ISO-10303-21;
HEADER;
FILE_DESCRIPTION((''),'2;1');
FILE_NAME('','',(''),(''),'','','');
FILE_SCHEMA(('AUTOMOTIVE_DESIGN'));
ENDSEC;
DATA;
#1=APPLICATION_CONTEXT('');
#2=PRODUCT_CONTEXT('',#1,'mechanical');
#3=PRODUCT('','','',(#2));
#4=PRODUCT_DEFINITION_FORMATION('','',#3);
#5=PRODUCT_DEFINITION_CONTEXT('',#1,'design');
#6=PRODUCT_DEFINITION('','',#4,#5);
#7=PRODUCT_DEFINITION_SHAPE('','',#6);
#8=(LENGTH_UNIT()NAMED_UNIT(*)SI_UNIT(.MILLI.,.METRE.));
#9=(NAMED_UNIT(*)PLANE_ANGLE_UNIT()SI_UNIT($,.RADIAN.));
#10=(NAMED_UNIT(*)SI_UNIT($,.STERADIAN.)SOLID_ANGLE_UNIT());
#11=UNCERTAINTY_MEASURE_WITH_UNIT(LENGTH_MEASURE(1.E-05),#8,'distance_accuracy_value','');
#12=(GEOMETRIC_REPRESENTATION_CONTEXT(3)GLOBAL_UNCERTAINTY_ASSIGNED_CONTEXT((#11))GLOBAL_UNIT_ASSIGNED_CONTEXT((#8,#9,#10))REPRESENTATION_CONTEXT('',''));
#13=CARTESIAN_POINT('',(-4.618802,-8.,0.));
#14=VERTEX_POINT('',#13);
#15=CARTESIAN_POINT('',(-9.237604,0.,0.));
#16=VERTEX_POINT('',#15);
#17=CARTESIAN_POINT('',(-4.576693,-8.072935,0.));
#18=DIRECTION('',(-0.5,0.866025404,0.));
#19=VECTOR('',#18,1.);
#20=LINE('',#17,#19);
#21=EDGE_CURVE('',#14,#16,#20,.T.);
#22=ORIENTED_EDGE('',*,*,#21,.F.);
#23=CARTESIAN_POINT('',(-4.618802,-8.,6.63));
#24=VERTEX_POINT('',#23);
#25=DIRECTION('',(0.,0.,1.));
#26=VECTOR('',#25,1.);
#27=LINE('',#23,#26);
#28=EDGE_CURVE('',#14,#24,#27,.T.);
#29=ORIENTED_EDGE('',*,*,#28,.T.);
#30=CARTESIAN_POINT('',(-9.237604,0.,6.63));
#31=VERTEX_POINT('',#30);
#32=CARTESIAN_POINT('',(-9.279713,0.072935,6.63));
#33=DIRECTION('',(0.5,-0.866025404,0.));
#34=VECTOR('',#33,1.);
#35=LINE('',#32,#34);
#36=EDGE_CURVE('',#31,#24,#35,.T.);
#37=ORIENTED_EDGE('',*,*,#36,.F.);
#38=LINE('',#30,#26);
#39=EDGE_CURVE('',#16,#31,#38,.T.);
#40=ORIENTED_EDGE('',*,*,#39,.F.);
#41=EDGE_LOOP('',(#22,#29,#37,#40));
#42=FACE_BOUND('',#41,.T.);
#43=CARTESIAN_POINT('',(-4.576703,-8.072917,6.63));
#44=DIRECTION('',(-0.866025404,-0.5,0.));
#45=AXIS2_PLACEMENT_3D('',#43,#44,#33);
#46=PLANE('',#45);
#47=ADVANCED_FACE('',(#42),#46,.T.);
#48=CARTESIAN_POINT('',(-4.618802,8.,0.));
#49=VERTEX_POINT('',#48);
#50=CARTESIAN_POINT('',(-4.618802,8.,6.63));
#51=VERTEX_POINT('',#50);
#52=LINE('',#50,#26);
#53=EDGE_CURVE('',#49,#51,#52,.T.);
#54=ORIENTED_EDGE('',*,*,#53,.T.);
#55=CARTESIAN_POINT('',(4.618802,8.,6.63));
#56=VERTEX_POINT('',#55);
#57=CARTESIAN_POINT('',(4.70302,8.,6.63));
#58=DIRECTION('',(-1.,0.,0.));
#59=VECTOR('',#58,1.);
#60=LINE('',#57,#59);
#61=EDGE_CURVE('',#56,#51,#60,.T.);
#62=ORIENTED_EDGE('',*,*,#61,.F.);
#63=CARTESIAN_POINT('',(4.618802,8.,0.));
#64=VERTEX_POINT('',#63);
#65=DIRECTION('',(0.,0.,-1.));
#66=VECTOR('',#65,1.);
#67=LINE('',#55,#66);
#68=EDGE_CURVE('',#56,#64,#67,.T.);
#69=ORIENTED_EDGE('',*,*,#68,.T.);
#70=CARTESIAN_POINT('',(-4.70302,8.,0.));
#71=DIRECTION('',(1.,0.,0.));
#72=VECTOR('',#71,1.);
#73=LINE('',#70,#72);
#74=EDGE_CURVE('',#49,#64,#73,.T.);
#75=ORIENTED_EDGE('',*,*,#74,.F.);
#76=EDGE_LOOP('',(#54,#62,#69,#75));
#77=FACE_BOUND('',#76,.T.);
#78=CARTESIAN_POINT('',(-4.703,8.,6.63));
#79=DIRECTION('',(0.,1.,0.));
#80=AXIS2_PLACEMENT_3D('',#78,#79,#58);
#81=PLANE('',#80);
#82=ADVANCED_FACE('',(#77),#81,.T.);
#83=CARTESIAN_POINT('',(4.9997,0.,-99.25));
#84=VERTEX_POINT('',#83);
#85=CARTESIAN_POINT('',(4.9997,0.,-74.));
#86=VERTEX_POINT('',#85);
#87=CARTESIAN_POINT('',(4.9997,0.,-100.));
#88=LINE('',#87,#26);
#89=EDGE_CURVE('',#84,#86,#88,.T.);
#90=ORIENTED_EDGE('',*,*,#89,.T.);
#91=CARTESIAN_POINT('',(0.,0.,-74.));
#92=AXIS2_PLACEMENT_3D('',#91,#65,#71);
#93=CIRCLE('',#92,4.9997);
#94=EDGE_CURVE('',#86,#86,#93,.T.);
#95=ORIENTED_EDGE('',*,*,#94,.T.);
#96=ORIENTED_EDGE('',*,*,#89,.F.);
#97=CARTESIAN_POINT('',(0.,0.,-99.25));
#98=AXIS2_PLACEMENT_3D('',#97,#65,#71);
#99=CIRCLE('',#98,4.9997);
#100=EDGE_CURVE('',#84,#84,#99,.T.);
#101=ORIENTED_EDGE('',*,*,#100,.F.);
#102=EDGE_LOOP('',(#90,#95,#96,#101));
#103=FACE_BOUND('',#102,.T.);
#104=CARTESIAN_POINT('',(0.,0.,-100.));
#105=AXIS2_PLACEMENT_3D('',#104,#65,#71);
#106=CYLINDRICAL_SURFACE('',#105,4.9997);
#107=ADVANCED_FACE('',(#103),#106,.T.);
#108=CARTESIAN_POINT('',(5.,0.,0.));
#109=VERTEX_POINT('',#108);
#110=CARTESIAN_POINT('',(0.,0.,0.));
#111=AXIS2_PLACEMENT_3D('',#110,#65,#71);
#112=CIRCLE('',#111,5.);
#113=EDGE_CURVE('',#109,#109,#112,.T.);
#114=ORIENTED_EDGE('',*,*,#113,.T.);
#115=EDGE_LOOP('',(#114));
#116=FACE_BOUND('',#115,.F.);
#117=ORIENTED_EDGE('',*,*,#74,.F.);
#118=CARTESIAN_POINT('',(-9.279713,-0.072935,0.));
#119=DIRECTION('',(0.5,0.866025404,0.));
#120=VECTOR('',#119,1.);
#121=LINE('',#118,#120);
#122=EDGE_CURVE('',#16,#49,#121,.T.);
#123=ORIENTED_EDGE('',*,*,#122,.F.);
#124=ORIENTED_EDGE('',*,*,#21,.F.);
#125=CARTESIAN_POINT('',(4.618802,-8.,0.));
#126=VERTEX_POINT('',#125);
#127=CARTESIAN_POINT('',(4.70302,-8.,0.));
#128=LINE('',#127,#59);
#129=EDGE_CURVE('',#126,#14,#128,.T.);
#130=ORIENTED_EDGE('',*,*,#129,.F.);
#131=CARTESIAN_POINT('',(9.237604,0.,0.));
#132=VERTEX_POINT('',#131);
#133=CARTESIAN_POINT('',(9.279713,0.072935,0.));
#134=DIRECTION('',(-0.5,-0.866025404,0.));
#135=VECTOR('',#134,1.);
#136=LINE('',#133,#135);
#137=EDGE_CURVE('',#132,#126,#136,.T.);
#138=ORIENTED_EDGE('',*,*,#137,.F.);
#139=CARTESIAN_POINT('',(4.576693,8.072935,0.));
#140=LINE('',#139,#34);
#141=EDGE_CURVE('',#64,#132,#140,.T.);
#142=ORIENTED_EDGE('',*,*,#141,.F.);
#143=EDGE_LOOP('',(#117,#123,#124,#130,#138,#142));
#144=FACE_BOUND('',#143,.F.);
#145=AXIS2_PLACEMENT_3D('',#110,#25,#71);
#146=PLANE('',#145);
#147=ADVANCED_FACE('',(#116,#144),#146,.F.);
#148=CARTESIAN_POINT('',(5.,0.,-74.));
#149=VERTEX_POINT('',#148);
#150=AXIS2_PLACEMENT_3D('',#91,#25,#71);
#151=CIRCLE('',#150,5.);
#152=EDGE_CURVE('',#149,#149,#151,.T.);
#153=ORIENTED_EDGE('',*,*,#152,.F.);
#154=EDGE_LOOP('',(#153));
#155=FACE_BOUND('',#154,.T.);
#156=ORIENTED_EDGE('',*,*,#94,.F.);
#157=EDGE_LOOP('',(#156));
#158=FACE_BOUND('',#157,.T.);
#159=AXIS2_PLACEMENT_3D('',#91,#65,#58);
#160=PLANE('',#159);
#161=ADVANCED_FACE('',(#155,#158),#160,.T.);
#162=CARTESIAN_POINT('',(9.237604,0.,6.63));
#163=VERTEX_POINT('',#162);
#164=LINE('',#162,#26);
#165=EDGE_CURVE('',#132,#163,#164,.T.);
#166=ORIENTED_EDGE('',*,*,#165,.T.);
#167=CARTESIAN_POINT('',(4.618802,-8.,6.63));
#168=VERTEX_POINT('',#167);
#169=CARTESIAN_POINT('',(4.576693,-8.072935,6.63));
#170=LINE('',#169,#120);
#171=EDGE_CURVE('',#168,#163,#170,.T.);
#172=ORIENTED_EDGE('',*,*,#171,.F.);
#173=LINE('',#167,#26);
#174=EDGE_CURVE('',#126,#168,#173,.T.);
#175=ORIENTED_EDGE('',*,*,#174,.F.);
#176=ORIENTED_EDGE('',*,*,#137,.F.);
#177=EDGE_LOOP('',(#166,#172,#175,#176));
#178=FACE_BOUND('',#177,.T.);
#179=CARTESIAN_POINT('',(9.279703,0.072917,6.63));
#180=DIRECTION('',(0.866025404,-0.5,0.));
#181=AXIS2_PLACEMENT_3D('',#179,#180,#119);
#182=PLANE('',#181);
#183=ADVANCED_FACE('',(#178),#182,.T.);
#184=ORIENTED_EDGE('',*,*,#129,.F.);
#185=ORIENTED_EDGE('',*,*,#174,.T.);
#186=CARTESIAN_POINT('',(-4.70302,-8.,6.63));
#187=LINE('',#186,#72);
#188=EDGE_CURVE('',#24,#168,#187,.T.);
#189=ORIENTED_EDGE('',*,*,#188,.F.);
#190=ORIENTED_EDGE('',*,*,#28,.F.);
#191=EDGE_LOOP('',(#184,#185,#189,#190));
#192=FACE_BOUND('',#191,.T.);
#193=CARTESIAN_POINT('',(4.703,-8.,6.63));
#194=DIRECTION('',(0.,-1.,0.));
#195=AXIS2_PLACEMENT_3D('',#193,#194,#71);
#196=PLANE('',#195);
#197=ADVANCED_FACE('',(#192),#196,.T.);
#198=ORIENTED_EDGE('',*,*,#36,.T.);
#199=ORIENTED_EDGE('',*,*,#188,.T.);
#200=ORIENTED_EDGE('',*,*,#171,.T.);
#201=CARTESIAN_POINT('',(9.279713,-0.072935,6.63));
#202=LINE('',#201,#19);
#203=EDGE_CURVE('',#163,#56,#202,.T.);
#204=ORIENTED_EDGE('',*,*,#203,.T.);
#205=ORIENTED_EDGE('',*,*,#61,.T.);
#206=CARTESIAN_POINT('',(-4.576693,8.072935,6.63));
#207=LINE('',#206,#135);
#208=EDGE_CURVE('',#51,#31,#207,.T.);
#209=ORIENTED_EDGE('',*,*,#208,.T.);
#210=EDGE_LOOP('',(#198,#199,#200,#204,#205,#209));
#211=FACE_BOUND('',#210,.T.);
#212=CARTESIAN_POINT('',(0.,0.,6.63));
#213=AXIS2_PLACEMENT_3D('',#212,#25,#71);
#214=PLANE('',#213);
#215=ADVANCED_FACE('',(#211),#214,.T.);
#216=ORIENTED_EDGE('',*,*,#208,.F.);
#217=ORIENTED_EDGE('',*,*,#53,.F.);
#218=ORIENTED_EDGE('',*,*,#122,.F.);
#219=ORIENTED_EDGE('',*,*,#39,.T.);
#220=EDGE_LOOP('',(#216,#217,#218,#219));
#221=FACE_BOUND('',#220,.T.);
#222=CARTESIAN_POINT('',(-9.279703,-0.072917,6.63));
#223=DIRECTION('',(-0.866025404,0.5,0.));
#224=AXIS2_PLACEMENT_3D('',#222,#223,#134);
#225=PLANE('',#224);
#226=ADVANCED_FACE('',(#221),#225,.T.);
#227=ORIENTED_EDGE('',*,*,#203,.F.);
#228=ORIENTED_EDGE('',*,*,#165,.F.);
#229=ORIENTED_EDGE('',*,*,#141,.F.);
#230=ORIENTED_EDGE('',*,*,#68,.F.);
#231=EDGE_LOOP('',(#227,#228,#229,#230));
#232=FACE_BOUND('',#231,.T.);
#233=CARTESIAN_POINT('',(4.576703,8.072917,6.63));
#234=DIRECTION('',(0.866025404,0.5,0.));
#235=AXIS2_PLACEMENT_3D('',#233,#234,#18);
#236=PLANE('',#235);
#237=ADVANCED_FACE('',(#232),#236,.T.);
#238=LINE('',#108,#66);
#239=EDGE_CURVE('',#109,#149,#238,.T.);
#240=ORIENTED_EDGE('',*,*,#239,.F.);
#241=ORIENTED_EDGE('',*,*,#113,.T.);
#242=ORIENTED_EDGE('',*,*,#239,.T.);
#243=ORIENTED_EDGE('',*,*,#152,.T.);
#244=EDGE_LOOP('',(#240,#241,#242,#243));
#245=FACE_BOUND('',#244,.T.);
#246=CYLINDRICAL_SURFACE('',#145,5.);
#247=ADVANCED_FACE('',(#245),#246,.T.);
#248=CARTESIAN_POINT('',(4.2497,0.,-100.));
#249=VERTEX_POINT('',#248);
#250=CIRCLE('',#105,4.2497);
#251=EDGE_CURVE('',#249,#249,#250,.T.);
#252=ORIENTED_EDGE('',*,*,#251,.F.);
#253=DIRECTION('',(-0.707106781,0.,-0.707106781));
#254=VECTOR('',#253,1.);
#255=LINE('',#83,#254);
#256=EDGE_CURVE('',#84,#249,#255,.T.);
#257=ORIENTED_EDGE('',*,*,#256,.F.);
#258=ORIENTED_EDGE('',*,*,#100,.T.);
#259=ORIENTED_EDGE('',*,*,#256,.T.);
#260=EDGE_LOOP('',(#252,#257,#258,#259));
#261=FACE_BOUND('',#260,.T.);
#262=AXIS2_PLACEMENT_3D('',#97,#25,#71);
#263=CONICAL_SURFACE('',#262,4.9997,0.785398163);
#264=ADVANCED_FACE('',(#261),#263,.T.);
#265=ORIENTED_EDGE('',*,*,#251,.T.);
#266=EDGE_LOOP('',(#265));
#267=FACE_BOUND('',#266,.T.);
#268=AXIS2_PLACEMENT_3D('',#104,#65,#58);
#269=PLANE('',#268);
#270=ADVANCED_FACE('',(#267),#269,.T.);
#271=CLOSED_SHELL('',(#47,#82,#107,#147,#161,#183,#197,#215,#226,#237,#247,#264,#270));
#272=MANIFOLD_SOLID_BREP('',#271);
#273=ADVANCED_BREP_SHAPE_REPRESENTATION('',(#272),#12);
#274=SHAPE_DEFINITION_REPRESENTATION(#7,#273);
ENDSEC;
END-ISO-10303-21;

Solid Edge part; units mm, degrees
sketch "Sketch1" plane through (0, 0, 0) normal (0, 0, 1) x (1, 0, 0)
  circle A0 centre (0, 0) radius 9.28
  dimension "D1" = 18.56
extrude "Protrusion1" add sketch "Sketch1" along normal blind 6.63
sketch "Sketch2" plane through (0, 0, 0) normal (0, 0, -1) x (1, 0, 0)
  circle A0 centre (0, 0) radius 5
extrude "Protrusion2" add sketch "Sketch2" along normal blind 100
sketch "Sketch3" plane through (0, 0, -100) normal (0, 0, -1) x (1, 0, 0)
  circle A0 centre (0, 0) radius 4.9997
extrude "Cutout1" cut sketch "Sketch3" against normal blind 26 flip side to cut
chamfer "Chamfer_1" distance 0.75 angle 45 1 edges at (-4.9997, 0, -100)
sketch "Sketch4" plane through (0, 0, 6.63) normal (0, 0, 1) x (1, 0, 0)
  line L0 (-4.703, 8) -> (4.703, 8)
  dimension "D1" = 16
extrude "Cutout2" cut sketch "Sketch4" against normal up to next material side at (0, 8.05, 6.63)
pattern_circular "Pattern1" count 6 over 360 about axis through (0, 0, 6.63) along (0, 0, 1) of "Cutout2"
properties part number "155884"
